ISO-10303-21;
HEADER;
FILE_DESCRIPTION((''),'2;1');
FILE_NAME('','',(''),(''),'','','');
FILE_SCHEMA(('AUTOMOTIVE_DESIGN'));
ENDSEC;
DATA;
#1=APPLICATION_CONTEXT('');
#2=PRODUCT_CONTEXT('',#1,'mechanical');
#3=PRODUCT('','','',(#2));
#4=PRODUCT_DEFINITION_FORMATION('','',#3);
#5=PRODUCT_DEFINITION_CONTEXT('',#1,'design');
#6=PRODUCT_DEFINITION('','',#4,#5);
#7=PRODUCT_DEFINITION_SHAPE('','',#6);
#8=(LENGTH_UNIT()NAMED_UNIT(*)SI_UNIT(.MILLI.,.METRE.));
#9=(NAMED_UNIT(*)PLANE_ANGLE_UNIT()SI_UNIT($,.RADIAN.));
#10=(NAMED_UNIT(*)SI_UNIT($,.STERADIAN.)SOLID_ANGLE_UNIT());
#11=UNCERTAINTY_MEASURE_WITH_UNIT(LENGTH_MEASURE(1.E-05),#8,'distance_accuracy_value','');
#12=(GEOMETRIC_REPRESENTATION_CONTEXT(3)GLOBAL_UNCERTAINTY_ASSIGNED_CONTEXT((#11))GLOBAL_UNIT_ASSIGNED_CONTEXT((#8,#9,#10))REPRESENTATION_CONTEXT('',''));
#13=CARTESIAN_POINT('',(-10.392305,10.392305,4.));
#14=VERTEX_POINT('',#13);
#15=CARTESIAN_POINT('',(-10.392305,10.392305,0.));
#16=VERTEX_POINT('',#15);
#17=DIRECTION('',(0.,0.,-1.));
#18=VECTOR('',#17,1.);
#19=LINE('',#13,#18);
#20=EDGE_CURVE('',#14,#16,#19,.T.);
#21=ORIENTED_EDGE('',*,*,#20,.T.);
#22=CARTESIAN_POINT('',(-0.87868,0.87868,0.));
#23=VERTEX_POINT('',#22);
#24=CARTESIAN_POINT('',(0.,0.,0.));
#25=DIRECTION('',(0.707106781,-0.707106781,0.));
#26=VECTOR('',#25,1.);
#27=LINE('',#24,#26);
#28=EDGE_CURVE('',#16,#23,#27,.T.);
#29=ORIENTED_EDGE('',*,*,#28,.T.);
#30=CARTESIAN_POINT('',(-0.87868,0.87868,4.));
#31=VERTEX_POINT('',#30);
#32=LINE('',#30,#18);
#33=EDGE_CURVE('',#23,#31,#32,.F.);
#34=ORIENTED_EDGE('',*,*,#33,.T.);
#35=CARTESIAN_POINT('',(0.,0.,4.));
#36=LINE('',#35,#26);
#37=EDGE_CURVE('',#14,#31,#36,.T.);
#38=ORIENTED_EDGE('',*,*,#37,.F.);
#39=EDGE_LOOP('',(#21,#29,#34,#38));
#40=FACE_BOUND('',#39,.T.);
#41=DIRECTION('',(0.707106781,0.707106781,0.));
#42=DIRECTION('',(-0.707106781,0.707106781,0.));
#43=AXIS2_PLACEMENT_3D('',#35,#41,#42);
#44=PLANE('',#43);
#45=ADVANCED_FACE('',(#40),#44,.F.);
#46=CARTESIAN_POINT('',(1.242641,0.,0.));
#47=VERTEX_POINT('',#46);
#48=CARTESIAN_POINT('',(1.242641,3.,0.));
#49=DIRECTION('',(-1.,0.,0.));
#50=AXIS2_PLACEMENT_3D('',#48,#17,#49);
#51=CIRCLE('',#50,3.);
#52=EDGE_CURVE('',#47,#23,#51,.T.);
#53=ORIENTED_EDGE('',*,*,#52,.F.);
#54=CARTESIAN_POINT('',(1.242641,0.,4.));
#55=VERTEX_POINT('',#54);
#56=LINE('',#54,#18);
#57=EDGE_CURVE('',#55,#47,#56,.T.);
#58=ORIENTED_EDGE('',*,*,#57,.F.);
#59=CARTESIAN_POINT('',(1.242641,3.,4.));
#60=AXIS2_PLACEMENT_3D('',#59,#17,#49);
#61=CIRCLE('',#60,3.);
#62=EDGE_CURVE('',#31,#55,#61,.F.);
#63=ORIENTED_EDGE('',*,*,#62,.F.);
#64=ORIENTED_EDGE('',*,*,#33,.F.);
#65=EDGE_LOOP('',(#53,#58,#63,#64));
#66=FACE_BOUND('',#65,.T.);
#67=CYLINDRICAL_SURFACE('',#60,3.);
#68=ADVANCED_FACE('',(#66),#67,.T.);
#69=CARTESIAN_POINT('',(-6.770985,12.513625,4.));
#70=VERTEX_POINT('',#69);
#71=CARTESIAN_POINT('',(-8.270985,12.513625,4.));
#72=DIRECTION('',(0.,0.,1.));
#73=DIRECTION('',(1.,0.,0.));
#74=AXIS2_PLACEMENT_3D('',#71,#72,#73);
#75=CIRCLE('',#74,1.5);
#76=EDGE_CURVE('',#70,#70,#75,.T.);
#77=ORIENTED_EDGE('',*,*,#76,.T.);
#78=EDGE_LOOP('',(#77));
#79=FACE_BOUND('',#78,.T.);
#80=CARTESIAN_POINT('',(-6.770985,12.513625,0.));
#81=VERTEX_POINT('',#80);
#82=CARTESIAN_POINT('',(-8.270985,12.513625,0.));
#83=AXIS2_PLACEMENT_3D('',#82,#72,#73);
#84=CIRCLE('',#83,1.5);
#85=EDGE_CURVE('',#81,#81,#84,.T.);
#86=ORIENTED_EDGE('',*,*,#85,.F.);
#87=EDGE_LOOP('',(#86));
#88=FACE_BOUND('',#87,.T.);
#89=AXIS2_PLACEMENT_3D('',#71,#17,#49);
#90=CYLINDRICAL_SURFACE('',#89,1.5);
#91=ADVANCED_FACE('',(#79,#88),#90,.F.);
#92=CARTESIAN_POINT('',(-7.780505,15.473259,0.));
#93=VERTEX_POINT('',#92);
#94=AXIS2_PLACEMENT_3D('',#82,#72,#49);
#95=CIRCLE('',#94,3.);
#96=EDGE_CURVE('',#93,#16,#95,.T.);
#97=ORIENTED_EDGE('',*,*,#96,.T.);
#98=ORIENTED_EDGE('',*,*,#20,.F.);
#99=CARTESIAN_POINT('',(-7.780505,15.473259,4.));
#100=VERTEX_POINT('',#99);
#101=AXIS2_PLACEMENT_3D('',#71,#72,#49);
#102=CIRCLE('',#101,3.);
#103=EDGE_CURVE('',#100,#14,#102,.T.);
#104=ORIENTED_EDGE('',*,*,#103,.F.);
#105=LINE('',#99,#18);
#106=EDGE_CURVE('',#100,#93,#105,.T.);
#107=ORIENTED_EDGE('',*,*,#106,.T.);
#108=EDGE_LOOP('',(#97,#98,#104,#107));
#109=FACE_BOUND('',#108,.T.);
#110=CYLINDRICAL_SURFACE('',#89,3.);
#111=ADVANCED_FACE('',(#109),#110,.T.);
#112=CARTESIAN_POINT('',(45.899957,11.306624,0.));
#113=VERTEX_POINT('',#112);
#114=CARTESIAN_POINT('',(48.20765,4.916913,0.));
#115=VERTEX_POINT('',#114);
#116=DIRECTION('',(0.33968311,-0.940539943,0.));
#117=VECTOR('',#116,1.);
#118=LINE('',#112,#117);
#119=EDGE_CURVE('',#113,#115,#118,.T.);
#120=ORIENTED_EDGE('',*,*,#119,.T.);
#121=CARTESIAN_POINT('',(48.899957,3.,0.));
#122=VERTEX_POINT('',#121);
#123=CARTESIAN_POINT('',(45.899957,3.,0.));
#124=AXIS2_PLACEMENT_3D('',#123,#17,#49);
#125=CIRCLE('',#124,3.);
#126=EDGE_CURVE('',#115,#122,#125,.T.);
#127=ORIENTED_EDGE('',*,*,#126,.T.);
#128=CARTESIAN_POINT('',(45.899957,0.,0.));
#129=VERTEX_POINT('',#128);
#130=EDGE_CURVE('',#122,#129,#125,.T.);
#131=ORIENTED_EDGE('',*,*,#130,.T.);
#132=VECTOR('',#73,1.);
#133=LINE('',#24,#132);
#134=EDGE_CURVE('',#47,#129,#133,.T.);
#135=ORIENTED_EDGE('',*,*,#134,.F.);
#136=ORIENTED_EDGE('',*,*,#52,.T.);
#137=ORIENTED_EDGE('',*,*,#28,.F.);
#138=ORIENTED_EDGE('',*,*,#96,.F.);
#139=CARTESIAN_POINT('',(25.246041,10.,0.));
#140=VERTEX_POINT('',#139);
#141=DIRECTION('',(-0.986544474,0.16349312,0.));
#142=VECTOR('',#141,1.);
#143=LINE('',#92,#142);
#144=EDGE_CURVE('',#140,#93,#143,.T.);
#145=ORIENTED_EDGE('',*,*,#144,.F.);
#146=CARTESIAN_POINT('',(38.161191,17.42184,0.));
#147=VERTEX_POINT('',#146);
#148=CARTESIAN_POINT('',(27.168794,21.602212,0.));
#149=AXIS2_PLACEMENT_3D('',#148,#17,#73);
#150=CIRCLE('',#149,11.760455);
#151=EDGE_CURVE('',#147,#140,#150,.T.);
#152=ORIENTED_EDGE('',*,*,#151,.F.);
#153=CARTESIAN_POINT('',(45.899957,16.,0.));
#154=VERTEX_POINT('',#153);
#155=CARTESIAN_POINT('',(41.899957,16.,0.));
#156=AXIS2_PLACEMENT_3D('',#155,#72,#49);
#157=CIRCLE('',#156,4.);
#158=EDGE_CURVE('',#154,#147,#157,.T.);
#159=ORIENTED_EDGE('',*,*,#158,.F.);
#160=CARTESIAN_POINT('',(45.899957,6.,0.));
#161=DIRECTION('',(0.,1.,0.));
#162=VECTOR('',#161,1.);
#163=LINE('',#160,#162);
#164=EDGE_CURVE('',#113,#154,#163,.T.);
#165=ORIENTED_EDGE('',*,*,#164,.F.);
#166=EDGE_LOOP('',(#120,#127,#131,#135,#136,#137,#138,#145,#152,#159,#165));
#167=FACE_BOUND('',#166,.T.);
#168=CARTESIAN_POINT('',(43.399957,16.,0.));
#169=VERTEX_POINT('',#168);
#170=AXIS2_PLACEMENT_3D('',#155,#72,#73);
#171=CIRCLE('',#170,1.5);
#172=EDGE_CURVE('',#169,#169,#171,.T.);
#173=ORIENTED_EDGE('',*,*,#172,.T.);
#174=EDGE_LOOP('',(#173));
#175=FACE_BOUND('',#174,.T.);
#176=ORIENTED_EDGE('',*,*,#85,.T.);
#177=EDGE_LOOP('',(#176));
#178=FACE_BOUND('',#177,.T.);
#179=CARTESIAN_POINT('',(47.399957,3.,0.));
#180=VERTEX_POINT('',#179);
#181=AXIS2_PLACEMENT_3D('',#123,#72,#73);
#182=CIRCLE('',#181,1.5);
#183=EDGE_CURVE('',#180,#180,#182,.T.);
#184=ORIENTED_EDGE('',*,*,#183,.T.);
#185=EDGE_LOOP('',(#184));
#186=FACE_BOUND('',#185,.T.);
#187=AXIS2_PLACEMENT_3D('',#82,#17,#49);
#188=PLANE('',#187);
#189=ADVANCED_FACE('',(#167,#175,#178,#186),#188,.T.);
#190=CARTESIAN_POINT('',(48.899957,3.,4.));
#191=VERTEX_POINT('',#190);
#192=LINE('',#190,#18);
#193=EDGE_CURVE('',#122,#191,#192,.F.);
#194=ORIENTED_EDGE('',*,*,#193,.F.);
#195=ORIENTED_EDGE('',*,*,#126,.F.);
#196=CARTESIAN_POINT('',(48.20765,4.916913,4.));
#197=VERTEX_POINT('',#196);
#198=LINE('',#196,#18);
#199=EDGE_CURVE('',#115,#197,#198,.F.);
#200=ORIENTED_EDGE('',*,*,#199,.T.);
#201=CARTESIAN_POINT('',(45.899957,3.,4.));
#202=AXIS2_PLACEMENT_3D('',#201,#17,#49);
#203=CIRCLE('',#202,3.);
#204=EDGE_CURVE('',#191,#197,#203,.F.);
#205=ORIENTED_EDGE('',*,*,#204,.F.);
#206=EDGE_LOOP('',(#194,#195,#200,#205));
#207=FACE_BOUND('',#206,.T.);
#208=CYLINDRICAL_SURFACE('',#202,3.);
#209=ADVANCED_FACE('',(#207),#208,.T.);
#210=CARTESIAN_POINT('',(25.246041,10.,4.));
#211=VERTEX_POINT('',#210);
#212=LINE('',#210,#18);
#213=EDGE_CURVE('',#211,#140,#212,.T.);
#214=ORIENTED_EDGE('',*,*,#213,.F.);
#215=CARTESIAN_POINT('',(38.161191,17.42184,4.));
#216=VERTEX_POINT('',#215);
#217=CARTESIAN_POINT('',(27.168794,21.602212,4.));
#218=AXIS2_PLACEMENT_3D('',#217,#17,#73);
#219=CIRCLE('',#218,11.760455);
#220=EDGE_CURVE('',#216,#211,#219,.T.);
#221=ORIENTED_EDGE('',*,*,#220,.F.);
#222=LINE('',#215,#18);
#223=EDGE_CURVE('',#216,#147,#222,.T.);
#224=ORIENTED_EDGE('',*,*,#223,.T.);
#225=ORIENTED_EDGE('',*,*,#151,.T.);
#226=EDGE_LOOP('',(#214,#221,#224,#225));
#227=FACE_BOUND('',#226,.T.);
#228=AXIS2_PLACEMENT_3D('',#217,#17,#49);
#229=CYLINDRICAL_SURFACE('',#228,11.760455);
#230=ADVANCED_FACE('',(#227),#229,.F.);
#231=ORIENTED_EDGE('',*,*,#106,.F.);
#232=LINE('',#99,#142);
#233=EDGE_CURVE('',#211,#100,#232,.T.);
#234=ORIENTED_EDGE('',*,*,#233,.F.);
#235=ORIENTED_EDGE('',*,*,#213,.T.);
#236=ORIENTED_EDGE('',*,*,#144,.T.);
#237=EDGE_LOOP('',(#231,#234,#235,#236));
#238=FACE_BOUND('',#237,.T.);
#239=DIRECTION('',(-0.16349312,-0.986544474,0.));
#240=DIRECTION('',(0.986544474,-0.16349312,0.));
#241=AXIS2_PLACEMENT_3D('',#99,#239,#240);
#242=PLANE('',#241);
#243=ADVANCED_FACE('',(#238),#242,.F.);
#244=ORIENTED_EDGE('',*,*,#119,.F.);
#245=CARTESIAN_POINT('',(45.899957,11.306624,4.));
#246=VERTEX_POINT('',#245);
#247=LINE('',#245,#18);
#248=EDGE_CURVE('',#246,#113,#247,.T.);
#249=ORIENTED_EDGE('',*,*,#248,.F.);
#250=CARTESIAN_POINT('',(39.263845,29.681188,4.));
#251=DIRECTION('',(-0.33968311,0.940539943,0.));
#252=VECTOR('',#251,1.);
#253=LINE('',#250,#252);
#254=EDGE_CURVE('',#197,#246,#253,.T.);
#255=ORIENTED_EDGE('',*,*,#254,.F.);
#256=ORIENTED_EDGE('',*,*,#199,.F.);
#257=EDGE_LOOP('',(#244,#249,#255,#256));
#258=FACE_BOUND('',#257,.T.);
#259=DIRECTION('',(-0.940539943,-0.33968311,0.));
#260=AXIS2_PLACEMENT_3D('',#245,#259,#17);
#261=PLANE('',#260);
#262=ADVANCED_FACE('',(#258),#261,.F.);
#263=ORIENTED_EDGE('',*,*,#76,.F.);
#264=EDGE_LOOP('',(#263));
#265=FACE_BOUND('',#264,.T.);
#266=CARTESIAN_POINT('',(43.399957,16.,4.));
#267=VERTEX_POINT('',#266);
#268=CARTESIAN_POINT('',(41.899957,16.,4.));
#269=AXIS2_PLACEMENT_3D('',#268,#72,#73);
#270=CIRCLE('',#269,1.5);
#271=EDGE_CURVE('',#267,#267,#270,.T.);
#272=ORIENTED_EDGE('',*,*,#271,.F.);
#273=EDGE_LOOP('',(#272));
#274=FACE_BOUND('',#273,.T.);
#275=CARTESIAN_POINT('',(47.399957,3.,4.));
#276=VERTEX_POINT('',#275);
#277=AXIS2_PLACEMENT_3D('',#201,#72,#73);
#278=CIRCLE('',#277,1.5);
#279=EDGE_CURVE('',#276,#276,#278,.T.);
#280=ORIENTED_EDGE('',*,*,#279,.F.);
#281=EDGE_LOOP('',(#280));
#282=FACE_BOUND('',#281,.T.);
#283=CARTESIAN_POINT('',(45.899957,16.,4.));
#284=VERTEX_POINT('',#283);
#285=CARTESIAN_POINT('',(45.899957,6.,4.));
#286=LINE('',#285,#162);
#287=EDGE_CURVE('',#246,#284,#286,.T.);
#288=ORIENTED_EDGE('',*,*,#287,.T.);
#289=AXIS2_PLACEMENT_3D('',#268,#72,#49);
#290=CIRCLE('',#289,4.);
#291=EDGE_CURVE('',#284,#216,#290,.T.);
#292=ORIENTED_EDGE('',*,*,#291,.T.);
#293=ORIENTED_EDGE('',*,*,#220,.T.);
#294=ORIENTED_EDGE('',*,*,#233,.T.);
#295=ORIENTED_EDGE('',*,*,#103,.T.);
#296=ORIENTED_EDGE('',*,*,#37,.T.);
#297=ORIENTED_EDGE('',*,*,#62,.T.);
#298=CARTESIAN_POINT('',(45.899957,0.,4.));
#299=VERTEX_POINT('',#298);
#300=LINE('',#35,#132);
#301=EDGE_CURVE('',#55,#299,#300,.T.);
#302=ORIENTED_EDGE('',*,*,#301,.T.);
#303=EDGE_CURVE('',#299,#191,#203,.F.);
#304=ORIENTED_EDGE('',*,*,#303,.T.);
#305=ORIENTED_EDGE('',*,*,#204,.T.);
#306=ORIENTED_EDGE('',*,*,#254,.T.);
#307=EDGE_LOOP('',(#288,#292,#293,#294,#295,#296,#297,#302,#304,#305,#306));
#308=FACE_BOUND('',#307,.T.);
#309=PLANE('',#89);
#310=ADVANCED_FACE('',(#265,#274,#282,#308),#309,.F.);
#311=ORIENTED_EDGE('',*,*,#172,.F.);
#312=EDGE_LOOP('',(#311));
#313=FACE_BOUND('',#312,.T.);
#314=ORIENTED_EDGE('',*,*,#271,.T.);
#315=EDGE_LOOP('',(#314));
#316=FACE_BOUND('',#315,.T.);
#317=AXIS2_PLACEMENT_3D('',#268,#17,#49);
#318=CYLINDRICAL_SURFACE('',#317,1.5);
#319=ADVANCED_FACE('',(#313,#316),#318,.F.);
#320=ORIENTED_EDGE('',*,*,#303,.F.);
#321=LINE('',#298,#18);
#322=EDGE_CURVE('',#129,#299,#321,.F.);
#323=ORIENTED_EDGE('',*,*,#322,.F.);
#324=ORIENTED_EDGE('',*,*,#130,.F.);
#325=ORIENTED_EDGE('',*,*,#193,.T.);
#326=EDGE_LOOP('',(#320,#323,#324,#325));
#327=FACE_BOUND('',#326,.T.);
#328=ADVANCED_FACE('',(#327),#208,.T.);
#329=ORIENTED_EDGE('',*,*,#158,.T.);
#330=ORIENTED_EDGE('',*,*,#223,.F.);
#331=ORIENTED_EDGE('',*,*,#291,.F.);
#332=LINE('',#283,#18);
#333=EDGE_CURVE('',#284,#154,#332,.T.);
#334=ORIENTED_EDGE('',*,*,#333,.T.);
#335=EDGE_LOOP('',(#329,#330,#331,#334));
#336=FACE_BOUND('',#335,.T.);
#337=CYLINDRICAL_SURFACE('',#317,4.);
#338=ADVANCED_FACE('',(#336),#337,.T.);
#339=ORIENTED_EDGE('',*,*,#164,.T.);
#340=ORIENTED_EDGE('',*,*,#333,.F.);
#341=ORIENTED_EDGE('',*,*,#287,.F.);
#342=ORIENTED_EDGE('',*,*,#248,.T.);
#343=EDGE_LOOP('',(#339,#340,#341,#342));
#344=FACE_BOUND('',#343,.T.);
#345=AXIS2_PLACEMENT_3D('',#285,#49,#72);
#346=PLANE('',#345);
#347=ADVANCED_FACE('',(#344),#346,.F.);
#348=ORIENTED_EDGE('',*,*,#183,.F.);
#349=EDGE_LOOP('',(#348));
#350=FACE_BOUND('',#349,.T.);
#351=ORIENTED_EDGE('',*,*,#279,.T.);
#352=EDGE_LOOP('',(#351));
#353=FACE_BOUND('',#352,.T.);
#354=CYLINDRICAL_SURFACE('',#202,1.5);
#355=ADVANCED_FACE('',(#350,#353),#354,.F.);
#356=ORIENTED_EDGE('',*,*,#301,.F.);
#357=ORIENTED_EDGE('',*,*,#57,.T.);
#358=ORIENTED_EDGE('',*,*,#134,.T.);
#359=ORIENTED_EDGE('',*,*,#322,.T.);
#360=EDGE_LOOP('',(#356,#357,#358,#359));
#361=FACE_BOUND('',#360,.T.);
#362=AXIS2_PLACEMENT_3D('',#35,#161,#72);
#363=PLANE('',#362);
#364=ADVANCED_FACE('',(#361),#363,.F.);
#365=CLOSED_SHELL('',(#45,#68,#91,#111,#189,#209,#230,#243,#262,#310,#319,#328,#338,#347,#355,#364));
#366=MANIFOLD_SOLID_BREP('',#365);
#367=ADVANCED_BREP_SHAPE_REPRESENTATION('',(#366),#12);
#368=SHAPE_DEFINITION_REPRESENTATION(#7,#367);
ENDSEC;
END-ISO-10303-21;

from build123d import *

# Parameters (mm, degrees)
SKETCH1_R           = 1.5
BOSS_EXTRUDE1_DEPTH = 4
FILLET3_R           = 3
CHAMFER1_DEPTH      = 4


with BuildPart() as part:
    # Sketch1 → Boss-Extrude1 (new body)
    with BuildSketch(Plane.XY):
        with BuildLine():
            Line((0, 0), (48.899957301, 0))
            Line((48.899957301, 0), (48.899957301, 6))
            Line((48.899957301, 6), (45.899957301, 6))
            Line((45.899957301, 6), (45.899957301, 16))
            ThreePointArc((45.899957301, 16), (42.622776894, 19.934149442), (38.161191383, 17.42184015))
            ThreePointArc((38.161191383, 17.42184015), (33.02844755, 11.405508249), (25.246040765, 10))
            Line((25.246040765, 10), (-7.780505141, 15.473258612))
            ThreePointArc((-7.780505141, 15.473258612), (-10.939117439, 13.885145013), (-10.392304845, 10.392304845))
            Line((-10.392304845, 10.392304845), (0, 0))
        make_face()
        with Locations((41.899957301, 16)):
            Circle(SKETCH1_R, mode=Mode.SUBTRACT)
        with Locations((-8.270984502, 12.513625189)):
            Circle(SKETCH1_R, mode=Mode.SUBTRACT)
        with Locations((45.899957301, 3)):
            Circle(SKETCH1_R, mode=Mode.SUBTRACT)
    extrude(amount=BOSS_EXTRUDE1_DEPTH)

    # Fillet3
    fillet3_edges = [part.edges().sort_by_distance(p)[0] for p in [
        (0, 0, 2),
        (48.899957301, 0, 2),
        (48.899957301, 6, 2),
    ]]
    fillet(fillet3_edges, radius=FILLET3_R - 0.0001)  # a hair under: the kernel refuses the full size

    # Chamfer1: read off the stored shape, not the designer's step
    # Chamfer1 outline → Chamfer1 (add)
    with BuildSketch(Plane.XY):
        with BuildLine():
            Line((48.207649608, 4.916913199), (45.899957301, 11.306623863))
            Line((45.899957301, 11.306623863), (45.899957301, 6))
            ThreePointArc((45.899957301, 6), (47.174567124, 5.715763207), (48.207649608, 4.916913199))
        make_face()
    extrude(amount=CHAMFER1_DEPTH)


solid = part.part
